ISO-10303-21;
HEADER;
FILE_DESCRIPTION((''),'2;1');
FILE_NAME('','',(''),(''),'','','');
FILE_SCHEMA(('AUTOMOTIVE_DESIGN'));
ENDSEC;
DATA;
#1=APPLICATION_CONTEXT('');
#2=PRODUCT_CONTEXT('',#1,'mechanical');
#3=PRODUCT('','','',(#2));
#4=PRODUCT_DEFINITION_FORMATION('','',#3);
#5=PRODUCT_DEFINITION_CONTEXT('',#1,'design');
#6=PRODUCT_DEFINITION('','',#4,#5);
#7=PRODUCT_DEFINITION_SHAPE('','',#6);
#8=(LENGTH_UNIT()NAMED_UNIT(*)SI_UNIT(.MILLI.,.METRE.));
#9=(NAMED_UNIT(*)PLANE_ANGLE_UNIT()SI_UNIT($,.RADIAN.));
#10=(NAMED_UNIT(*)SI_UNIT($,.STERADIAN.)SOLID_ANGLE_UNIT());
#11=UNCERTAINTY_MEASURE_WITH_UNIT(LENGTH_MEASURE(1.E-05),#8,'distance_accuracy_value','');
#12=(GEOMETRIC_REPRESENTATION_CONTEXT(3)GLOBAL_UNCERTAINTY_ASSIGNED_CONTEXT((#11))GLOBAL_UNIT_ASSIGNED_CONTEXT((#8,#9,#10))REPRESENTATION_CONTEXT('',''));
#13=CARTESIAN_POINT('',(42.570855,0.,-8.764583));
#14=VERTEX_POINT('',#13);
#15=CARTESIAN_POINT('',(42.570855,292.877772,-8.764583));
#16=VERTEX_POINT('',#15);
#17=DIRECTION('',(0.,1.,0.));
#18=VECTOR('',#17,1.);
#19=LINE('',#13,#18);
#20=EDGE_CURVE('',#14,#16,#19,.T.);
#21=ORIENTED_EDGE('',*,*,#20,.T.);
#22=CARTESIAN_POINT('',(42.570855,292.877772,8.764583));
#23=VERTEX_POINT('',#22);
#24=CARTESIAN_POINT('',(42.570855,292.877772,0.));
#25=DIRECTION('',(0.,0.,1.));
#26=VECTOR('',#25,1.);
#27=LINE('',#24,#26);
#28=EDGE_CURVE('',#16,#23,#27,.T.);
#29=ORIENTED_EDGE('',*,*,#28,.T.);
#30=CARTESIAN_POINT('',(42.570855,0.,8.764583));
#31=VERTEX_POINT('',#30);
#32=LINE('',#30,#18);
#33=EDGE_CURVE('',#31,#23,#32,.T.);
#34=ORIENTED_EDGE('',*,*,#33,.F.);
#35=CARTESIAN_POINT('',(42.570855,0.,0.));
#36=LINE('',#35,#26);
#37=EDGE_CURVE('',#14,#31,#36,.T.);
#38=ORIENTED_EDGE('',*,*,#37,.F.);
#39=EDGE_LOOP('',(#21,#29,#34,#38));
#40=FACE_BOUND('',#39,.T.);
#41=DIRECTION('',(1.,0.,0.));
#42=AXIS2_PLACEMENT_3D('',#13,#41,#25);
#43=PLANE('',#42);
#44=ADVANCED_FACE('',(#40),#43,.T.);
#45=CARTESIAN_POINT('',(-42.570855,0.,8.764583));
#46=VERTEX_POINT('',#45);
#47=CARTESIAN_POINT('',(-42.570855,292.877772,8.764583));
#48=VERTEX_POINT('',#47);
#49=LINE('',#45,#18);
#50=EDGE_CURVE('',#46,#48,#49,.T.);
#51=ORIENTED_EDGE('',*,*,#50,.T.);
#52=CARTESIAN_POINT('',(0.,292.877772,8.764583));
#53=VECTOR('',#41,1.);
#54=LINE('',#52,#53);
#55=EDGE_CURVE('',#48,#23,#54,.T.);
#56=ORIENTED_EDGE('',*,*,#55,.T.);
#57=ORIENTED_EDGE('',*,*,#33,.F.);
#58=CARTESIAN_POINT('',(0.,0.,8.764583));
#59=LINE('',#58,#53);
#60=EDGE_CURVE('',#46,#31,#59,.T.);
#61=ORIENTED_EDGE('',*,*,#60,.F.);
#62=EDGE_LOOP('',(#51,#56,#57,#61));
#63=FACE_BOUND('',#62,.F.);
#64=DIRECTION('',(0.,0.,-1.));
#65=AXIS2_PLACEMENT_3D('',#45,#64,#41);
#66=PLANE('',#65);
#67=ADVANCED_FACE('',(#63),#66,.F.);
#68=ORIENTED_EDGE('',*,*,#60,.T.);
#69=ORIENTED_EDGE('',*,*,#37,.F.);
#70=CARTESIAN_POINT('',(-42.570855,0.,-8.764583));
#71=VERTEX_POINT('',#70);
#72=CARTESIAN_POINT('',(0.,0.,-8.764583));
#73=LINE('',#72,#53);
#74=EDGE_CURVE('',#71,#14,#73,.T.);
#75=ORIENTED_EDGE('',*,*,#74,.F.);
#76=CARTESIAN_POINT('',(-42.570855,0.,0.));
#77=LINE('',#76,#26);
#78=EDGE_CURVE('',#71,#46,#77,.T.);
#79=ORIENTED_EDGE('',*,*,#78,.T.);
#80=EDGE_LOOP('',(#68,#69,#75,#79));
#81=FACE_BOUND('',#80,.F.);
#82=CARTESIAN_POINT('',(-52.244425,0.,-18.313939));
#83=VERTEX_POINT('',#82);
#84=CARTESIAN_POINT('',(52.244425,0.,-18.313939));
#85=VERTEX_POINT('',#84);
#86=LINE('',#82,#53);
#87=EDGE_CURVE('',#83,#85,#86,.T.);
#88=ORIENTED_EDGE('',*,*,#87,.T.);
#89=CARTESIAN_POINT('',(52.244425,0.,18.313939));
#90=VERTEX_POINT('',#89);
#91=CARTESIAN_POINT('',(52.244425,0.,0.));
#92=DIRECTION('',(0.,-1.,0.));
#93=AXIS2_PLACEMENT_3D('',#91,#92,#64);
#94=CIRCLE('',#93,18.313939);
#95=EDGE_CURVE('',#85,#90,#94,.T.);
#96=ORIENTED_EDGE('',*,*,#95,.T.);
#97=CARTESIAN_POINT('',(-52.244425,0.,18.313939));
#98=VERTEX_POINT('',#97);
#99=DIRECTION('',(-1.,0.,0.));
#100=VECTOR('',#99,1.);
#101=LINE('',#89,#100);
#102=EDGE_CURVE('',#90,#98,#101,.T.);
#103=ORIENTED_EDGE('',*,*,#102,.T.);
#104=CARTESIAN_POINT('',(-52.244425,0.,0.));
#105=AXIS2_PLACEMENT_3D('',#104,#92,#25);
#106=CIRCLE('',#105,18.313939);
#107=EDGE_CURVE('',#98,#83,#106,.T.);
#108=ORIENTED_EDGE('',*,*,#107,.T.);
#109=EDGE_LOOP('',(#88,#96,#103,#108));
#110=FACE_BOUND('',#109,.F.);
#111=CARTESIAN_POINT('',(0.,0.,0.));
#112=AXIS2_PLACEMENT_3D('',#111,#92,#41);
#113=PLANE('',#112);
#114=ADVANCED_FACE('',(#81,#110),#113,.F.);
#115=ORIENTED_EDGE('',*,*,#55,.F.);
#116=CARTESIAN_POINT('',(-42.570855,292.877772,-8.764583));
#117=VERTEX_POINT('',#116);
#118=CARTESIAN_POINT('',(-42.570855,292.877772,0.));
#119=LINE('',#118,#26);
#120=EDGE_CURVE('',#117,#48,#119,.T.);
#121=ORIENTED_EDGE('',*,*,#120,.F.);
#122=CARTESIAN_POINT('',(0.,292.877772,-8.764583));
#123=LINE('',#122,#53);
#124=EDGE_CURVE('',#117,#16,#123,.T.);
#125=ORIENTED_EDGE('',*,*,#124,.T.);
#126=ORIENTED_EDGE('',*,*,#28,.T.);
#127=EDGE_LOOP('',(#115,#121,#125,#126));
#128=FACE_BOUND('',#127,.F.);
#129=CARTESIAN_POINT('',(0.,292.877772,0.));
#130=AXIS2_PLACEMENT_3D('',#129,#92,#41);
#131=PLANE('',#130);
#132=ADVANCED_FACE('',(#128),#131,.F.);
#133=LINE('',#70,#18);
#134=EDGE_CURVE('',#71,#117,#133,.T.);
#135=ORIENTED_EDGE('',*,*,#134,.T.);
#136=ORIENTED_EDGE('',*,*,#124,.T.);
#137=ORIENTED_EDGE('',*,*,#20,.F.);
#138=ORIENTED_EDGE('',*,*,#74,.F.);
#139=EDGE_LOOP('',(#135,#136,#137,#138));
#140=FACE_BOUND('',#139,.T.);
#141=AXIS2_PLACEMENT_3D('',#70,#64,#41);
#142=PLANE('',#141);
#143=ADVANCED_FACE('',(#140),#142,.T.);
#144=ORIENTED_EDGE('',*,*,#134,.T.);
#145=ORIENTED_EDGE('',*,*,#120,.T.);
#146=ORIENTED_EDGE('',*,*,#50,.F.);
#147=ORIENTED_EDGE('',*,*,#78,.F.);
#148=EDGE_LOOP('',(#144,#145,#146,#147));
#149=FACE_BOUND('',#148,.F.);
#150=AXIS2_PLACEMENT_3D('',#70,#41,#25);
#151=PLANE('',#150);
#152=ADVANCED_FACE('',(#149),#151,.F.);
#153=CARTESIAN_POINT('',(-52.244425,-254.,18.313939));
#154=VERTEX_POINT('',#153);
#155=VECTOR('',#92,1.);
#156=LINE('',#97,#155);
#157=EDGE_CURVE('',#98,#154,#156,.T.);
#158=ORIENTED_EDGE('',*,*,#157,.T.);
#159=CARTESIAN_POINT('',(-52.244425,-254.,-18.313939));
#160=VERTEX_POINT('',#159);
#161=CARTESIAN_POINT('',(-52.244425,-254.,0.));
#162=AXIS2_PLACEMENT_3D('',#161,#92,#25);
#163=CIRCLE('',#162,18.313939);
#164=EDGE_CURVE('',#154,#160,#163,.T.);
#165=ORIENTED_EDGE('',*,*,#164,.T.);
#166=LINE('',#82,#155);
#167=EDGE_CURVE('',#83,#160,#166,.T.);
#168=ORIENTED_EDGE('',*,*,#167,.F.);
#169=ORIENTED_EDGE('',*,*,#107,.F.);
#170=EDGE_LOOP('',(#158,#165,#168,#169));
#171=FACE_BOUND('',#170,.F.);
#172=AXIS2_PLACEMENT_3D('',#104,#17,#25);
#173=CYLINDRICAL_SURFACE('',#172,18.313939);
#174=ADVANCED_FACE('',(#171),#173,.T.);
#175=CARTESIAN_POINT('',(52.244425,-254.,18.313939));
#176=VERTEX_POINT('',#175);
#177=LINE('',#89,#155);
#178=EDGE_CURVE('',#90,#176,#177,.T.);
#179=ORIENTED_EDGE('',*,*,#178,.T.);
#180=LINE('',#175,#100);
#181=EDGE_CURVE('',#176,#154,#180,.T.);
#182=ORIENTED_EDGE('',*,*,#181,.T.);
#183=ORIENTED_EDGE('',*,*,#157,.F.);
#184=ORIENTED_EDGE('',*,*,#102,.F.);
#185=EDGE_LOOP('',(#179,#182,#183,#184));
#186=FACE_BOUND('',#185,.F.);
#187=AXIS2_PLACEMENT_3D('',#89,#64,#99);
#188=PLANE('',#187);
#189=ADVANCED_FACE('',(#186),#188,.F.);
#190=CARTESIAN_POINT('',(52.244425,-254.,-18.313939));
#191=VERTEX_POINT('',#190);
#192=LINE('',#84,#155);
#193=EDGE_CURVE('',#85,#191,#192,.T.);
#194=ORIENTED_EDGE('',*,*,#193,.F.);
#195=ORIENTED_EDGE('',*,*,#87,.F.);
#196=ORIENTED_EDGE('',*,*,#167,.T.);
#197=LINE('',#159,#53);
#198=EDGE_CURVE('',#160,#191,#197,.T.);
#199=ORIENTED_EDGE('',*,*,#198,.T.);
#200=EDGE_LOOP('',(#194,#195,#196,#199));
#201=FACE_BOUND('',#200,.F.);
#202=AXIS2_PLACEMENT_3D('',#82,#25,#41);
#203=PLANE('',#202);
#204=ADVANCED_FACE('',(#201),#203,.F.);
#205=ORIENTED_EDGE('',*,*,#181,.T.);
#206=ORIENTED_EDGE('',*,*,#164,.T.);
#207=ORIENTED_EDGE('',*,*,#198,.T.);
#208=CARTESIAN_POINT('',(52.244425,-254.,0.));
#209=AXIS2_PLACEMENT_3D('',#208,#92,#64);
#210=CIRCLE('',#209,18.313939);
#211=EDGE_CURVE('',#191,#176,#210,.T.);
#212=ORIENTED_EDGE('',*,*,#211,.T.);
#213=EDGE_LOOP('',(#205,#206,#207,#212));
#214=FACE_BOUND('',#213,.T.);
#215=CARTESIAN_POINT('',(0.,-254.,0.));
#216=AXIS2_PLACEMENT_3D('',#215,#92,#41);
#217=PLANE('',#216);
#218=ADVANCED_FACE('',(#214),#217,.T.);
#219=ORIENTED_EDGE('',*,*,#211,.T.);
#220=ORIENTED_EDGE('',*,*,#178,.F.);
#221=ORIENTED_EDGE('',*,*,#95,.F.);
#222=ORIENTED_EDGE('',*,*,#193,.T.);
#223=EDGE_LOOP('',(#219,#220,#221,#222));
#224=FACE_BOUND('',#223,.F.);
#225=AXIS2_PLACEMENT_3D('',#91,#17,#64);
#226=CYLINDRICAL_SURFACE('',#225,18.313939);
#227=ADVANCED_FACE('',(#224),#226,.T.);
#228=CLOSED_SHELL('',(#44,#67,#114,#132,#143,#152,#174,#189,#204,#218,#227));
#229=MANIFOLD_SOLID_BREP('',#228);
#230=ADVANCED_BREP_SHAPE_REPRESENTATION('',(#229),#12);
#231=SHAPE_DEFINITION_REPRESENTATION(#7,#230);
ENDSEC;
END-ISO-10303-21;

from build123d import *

# Parameters (mm, degrees)
F1_DEPTH = 254
F2_W     = 85.141710937
F2_H     = 17.5291653723
F3_DEPTH = 292.8777724


# Not quite as in the source:
# - an extrude ends at something that could not be found from the text; its depth is read off the source's solid


with BuildPart() as f1:
    # F0 (on Front) → F1 (new body)
    with BuildSketch(Plane.XZ):
        with BuildLine():
            Line((52.2444248199, 18.3139387518), (-52.2444248199, 18.3139387518))
            ThreePointArc((-52.2444248199, 18.3139387518), (-70.5583635718, 0), (-52.2444248199, -18.3139387518))
            Line((-52.2444248199, -18.3139387518), (52.2444248199, -18.3139387518))
            ThreePointArc((52.2444248199, -18.3139387518), (70.5583635718, 0), (52.2444248199, 18.3139387518))
        make_face()
    extrude(amount=F1_DEPTH)

    # F2 (on Front) → F3 (join, through all)
    with BuildSketch(Plane.XZ):
        Rectangle(F2_W, F2_H)
    extrude(amount=-F3_DEPTH)


solid = f1.part
